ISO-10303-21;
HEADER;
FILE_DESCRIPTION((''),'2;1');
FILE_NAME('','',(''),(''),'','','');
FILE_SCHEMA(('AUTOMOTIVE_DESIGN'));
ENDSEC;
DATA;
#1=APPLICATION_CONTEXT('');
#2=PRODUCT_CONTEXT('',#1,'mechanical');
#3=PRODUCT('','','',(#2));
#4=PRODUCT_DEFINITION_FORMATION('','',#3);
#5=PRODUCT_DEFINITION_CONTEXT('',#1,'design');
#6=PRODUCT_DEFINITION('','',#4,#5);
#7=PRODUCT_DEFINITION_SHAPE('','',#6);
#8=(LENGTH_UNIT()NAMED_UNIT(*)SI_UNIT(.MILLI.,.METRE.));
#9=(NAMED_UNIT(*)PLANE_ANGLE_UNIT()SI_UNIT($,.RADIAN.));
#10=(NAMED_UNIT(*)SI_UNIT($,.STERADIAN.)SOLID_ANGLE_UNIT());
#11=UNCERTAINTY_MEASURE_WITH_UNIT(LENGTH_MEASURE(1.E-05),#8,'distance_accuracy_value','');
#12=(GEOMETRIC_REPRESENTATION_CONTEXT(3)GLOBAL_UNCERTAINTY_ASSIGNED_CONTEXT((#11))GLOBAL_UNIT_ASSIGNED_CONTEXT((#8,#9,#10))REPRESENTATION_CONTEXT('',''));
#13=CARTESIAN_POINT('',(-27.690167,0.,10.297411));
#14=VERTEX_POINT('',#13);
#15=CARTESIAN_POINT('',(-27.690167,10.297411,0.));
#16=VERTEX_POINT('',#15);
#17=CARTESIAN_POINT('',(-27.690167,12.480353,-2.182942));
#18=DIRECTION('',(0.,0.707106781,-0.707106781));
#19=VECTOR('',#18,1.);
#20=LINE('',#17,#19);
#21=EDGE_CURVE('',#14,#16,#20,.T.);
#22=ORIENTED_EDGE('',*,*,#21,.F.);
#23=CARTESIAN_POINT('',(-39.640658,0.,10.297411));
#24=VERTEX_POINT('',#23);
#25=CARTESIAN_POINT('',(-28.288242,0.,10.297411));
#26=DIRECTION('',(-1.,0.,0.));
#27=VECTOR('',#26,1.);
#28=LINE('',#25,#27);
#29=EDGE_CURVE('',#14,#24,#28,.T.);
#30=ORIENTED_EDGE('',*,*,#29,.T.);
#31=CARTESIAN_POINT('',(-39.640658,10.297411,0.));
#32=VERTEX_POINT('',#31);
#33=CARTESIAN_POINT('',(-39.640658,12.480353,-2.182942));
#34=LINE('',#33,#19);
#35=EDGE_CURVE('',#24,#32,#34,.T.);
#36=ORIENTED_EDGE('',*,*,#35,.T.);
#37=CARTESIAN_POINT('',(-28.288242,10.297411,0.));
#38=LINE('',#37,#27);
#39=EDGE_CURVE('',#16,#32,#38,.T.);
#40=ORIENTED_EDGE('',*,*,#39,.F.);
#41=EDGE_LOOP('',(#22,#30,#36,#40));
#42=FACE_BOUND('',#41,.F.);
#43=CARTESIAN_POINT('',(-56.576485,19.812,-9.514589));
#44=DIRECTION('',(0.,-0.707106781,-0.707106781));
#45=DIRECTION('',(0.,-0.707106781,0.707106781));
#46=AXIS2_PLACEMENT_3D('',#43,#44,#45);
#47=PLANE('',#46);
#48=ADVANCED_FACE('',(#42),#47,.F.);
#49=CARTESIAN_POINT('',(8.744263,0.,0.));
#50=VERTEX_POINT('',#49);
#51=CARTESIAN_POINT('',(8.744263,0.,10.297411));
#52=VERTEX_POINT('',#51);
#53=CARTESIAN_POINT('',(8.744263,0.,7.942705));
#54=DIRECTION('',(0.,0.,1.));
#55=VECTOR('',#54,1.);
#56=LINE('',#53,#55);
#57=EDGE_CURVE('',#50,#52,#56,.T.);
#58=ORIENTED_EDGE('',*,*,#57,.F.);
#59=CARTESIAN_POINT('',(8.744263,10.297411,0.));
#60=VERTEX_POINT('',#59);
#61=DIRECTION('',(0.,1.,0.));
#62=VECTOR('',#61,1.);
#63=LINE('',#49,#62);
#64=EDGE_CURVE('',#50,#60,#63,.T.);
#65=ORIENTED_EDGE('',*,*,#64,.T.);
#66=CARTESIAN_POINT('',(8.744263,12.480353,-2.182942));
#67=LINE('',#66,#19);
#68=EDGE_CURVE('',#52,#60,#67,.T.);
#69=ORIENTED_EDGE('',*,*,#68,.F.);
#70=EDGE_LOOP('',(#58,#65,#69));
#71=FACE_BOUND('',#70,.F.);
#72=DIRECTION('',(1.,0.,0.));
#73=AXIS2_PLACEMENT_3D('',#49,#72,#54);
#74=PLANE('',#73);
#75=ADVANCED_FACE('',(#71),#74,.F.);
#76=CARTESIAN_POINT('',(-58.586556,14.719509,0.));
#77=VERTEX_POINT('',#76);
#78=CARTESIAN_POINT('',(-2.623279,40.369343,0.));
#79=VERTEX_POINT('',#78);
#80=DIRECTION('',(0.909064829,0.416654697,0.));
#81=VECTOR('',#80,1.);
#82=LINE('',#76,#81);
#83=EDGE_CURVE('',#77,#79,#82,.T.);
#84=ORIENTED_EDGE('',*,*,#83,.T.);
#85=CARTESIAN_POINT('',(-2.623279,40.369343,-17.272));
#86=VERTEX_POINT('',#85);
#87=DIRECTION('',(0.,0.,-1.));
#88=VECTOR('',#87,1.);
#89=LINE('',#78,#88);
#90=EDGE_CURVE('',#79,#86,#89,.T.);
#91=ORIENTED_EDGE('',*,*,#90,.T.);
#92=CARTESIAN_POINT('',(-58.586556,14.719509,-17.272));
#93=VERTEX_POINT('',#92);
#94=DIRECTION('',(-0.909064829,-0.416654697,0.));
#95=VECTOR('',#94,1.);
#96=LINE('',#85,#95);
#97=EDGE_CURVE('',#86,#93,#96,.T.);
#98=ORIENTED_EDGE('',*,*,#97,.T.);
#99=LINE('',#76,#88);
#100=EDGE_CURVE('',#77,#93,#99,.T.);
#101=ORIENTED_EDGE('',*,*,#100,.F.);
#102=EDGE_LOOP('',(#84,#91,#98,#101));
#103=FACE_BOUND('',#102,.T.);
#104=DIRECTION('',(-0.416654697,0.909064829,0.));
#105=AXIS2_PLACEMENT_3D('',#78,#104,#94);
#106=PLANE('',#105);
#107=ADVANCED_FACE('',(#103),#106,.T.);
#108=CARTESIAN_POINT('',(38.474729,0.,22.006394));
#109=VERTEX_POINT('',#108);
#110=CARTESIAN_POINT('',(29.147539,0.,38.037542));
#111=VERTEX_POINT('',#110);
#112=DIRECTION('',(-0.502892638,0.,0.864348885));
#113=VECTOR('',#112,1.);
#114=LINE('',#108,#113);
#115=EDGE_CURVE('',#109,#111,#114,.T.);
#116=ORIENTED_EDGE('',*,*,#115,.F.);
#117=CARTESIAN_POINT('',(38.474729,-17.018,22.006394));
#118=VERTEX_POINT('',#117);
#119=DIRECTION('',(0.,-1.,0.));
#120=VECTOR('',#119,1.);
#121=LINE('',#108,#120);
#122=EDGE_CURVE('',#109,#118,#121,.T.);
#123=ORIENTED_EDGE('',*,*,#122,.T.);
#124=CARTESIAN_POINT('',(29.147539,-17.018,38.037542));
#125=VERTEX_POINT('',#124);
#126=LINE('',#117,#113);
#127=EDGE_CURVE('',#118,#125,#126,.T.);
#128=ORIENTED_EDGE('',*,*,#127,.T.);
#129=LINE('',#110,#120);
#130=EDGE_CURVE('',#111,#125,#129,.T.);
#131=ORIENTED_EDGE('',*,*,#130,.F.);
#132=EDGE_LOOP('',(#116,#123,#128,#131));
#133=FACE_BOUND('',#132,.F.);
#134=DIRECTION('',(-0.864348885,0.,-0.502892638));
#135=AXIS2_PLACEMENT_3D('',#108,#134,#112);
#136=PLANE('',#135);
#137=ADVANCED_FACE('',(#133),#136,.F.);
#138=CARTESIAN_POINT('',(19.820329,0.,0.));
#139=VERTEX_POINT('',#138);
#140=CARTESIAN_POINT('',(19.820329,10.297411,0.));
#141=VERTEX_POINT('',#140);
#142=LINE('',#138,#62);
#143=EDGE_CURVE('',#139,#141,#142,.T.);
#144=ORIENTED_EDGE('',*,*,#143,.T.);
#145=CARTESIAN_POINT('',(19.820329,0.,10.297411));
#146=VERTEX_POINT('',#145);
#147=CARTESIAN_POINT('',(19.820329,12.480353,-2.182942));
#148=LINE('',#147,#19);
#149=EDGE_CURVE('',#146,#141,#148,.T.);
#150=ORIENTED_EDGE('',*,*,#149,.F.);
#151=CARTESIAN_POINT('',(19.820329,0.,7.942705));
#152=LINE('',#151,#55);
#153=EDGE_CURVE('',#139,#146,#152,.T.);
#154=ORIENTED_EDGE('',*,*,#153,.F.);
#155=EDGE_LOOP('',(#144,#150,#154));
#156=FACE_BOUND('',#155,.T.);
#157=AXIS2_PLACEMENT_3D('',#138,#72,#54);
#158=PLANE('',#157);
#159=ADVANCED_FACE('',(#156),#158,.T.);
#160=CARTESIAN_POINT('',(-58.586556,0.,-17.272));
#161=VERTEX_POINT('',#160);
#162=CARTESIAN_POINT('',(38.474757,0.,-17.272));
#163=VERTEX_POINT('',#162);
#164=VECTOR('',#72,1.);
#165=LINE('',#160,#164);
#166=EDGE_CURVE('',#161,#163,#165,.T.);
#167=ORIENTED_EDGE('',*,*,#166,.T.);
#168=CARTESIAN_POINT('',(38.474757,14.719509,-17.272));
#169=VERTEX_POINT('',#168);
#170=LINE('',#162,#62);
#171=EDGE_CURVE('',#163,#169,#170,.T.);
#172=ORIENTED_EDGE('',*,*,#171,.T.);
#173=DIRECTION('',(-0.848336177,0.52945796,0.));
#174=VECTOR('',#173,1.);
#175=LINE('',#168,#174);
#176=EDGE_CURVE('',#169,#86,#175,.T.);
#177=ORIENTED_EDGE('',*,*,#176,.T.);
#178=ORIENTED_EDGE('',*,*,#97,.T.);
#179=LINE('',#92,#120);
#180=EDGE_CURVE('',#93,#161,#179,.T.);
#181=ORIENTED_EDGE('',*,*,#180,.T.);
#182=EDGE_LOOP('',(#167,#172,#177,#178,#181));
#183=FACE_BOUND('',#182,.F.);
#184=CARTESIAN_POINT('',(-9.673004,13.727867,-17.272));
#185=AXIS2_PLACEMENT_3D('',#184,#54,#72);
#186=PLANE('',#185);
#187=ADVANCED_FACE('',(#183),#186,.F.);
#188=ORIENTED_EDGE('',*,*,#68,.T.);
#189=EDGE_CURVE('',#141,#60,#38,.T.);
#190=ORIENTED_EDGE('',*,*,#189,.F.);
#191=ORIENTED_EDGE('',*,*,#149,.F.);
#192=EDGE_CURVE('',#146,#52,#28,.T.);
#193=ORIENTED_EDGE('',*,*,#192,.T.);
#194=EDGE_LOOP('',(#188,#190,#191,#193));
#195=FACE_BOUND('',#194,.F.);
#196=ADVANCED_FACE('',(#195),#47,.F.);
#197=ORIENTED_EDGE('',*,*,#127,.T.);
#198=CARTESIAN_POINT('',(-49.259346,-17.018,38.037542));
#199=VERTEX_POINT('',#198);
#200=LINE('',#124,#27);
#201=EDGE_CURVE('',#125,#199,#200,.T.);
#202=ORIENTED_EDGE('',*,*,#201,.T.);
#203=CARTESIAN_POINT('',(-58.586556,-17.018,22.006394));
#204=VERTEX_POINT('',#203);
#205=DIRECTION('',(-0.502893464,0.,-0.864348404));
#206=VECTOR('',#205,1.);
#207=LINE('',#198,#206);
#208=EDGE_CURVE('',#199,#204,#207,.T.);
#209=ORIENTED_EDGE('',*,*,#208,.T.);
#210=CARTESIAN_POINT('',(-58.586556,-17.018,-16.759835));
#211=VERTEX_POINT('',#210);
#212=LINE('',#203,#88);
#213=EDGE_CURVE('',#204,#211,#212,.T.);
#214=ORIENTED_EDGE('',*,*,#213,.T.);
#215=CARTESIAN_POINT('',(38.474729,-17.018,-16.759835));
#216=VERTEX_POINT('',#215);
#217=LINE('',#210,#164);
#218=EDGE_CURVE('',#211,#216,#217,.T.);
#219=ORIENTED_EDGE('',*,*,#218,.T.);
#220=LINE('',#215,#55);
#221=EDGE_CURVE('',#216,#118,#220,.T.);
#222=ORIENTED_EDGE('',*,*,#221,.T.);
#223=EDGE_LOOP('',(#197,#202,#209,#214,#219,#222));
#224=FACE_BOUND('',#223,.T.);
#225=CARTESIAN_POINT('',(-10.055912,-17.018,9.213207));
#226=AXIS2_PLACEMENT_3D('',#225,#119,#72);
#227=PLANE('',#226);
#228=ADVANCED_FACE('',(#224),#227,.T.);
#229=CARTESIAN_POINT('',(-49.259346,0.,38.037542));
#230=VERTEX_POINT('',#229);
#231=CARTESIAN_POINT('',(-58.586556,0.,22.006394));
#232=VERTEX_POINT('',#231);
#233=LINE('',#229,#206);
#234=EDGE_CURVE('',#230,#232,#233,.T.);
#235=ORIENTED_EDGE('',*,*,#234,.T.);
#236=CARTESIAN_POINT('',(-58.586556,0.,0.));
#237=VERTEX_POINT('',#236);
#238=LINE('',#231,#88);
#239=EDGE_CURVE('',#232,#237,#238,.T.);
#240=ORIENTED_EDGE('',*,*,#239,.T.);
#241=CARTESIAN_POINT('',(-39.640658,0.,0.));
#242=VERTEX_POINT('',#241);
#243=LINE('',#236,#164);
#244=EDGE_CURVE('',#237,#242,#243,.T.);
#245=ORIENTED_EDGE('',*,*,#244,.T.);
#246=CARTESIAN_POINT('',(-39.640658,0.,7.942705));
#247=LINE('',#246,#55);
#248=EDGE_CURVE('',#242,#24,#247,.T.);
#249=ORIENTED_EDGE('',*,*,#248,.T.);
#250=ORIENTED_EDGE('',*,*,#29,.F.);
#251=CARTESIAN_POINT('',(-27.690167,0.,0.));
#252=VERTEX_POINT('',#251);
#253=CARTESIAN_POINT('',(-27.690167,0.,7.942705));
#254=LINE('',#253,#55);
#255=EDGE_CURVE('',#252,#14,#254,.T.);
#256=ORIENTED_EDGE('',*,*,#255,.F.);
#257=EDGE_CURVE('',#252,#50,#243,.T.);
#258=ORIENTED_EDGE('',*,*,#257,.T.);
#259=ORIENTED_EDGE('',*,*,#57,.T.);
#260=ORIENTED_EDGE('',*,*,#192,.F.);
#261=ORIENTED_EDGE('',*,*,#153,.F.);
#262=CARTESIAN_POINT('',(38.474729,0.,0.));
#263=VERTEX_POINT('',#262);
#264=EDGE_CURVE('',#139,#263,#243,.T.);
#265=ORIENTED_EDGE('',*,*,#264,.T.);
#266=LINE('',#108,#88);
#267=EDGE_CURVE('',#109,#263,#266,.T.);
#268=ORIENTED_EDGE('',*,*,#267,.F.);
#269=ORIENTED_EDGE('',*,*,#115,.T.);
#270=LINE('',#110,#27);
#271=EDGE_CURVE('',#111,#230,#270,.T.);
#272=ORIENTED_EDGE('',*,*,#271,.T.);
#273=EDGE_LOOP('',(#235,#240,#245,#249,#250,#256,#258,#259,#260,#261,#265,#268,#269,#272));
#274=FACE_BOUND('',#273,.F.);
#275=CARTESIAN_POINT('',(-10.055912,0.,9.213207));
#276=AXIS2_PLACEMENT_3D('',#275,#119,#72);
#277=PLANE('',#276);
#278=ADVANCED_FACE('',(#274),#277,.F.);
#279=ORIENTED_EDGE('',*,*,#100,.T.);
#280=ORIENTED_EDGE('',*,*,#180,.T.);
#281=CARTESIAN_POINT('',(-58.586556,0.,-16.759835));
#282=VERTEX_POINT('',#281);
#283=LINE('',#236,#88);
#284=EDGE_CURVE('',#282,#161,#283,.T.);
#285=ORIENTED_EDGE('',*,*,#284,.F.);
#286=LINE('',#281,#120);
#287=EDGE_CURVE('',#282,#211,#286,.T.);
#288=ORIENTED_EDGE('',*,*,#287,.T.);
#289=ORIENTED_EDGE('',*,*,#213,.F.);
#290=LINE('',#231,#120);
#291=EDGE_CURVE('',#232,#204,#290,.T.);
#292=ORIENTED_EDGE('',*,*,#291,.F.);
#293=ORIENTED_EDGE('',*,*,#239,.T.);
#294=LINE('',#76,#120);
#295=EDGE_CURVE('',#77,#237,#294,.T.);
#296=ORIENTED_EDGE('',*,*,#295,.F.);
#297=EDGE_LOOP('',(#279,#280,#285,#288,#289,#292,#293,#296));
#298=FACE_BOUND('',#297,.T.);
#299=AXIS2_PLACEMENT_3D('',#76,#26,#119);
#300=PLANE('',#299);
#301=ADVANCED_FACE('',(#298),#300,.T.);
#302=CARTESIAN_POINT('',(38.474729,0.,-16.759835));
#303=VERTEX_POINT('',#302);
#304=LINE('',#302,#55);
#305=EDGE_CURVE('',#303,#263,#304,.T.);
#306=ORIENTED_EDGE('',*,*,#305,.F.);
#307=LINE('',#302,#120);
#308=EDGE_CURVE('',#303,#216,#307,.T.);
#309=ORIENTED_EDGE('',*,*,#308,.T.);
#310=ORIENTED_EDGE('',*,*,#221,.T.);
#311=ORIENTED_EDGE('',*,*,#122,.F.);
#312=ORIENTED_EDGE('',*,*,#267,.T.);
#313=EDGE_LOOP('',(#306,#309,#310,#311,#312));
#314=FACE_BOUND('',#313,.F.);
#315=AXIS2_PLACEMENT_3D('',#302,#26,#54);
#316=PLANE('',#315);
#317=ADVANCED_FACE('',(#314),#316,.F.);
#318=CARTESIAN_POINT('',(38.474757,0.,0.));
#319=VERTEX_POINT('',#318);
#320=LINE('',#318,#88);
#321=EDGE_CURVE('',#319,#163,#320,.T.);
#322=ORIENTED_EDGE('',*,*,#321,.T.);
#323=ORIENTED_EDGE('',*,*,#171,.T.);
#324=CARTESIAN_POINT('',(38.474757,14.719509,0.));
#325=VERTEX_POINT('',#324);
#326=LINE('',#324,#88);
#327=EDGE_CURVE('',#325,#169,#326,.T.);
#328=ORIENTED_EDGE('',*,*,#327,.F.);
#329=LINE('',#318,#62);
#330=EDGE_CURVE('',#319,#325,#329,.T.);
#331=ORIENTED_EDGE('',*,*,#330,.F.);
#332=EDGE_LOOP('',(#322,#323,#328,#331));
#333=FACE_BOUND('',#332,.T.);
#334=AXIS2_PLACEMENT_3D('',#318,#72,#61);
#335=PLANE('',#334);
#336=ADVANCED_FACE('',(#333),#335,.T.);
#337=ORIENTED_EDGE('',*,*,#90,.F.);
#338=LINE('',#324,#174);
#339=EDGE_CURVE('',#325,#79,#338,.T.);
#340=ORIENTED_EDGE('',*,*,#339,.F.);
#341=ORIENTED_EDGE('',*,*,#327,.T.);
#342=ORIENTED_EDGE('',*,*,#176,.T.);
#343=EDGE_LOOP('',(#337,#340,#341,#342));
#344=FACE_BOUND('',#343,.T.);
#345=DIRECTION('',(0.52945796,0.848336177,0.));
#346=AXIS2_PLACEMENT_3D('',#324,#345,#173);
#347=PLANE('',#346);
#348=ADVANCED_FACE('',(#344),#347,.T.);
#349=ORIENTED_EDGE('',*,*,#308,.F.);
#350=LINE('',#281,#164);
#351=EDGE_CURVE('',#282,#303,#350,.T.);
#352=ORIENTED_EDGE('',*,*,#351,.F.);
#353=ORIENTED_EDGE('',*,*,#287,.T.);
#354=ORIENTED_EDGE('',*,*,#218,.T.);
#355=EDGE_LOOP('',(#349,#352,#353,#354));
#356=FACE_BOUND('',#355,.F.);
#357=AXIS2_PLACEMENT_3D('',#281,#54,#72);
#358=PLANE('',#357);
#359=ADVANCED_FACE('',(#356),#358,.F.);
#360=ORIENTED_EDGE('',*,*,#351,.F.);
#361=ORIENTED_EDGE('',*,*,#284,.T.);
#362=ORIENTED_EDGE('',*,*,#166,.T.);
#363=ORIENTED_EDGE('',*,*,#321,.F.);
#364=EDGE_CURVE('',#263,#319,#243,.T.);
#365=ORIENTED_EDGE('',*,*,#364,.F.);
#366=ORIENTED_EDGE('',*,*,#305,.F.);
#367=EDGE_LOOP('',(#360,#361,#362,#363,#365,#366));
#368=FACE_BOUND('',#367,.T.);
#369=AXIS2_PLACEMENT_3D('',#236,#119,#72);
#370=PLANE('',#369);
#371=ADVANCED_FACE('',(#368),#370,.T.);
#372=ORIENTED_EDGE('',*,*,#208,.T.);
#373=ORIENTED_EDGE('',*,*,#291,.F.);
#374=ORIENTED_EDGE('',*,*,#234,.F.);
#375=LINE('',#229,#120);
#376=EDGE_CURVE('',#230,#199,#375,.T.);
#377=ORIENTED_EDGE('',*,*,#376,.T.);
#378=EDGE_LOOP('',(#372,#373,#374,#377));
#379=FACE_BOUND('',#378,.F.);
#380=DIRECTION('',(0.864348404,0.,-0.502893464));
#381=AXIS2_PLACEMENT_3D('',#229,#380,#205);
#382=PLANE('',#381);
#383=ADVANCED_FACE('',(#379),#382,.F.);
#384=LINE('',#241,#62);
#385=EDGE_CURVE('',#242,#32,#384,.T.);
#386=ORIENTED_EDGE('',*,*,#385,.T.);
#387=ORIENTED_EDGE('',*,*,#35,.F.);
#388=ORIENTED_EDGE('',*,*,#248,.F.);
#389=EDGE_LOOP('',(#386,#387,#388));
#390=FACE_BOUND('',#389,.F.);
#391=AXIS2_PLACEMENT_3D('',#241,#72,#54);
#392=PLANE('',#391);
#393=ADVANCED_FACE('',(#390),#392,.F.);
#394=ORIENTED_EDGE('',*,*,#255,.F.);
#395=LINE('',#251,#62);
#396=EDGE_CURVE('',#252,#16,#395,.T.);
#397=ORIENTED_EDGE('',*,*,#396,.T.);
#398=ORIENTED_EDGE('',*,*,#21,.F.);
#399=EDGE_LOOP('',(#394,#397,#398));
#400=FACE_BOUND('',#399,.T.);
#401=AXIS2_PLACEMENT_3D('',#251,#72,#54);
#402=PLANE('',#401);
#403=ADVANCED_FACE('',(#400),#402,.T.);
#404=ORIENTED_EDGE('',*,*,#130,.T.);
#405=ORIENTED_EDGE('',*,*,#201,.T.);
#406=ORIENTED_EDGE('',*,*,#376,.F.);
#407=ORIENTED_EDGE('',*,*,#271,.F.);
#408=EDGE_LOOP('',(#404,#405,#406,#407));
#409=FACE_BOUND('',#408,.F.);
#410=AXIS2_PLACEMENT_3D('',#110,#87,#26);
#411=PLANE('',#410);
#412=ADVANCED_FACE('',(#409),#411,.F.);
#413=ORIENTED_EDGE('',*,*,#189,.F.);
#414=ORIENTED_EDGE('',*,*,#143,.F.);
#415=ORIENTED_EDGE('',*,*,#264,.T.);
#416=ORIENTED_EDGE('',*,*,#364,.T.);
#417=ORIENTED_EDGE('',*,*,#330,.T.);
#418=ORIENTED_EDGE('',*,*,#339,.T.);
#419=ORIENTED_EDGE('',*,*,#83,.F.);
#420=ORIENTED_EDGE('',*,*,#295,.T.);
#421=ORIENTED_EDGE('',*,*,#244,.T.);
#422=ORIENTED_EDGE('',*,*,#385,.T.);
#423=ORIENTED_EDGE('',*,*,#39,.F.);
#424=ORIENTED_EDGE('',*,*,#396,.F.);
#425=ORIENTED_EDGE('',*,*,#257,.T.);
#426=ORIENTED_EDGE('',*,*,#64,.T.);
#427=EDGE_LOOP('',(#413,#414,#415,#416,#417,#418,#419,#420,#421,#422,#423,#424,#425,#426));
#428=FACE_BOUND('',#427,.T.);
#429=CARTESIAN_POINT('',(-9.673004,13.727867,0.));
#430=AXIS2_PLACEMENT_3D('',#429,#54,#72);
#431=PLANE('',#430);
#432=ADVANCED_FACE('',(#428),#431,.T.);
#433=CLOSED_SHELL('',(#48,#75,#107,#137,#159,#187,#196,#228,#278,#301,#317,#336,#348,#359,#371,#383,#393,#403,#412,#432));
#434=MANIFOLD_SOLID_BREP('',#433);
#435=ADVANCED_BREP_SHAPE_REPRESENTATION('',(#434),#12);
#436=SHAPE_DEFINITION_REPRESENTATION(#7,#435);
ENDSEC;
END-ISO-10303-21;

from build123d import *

# Parameters (mm, degrees)
F1_DEPTH    = 17.018
F3_DEPTH    = 17.272
F4_W        = 11.0760657117
F4_H        = 15.8854108304
F4_W_2      = 11.9504909962
F5_DEPTH    = 19.812
F6_T4_DEPTH = 141.7175615003


# Not quite as in the source:
# - a fillet or chamfer that OpenCascade refuses, or shapes differently, is made with other operations: its cross-section is extruded or revolved along the edge and cut away or added
# - a feature of the source that left no trace in its solid (it failed there, or was rolled back) is left out


with BuildPart() as f1:
    # F0 (on Front) → F1 (new body)
    with BuildSketch(Plane.XZ):
        Polygon((-58.5865564644, 22.0063943416), (-58.5865564644, -16.7598351836), (38.4747292797, -16.7598351836), (38.4747292797, 22.0063943416), (29.1475392878, 38.0375422537), (-49.2593459785, 38.0375422537), align=None)
    extrude(amount=F1_DEPTH)

    # F2 (on Top) → F3 (join)
    with BuildSketch(Plane.XY):
        Polygon((-58.5865564644, 14.7195085883), (-58.5865564644, 0), (38.4747572243, 0), (38.4747572243, 14.7195085883), (-2.6232791133, 40.3693430126), align=None)
    extrude(amount=-F3_DEPTH)

    # F4 (on face) → F5 (join)
    with BuildSketch(Plane(origin=(0, 0, 0), x_dir=(-1, 0, 0), z_dir=(0, 1, 0))):
        with Locations((-14.282295946, 7.9427054152)):
            Rectangle(F4_W, F4_H)
        with Locations((33.6654121056, 7.9427054152)):
            Rectangle(F4_W_2, F4_H)
    extrude(amount=F5_DEPTH)

    # F6: chamfer of 25.4 on 1 edges, made by hand


with BuildPart() as f6_tool2:
    # F6_s3 → F6_t4 (new body)
    with BuildSketch(Plane.YZ.offset(-56.5764848041)):
        Polygon((19.812, -9.5145891696), (-5.588, 15.8854108304), (19.812, 15.8854108304), align=None)
    extrude(amount=F6_T4_DEPTH)

    split(bisect_by=Plane.XY, keep=Keep.TOP)

    split(bisect_by=Plane.XZ, keep=Keep.BOTTOM)


with BuildPart() as f1_1:
    add(f1.part)

    # F6_t1: cut F6_tool2
    add(f6_tool2.part, mode=Mode.SUBTRACT)


solid = f1_1.part
